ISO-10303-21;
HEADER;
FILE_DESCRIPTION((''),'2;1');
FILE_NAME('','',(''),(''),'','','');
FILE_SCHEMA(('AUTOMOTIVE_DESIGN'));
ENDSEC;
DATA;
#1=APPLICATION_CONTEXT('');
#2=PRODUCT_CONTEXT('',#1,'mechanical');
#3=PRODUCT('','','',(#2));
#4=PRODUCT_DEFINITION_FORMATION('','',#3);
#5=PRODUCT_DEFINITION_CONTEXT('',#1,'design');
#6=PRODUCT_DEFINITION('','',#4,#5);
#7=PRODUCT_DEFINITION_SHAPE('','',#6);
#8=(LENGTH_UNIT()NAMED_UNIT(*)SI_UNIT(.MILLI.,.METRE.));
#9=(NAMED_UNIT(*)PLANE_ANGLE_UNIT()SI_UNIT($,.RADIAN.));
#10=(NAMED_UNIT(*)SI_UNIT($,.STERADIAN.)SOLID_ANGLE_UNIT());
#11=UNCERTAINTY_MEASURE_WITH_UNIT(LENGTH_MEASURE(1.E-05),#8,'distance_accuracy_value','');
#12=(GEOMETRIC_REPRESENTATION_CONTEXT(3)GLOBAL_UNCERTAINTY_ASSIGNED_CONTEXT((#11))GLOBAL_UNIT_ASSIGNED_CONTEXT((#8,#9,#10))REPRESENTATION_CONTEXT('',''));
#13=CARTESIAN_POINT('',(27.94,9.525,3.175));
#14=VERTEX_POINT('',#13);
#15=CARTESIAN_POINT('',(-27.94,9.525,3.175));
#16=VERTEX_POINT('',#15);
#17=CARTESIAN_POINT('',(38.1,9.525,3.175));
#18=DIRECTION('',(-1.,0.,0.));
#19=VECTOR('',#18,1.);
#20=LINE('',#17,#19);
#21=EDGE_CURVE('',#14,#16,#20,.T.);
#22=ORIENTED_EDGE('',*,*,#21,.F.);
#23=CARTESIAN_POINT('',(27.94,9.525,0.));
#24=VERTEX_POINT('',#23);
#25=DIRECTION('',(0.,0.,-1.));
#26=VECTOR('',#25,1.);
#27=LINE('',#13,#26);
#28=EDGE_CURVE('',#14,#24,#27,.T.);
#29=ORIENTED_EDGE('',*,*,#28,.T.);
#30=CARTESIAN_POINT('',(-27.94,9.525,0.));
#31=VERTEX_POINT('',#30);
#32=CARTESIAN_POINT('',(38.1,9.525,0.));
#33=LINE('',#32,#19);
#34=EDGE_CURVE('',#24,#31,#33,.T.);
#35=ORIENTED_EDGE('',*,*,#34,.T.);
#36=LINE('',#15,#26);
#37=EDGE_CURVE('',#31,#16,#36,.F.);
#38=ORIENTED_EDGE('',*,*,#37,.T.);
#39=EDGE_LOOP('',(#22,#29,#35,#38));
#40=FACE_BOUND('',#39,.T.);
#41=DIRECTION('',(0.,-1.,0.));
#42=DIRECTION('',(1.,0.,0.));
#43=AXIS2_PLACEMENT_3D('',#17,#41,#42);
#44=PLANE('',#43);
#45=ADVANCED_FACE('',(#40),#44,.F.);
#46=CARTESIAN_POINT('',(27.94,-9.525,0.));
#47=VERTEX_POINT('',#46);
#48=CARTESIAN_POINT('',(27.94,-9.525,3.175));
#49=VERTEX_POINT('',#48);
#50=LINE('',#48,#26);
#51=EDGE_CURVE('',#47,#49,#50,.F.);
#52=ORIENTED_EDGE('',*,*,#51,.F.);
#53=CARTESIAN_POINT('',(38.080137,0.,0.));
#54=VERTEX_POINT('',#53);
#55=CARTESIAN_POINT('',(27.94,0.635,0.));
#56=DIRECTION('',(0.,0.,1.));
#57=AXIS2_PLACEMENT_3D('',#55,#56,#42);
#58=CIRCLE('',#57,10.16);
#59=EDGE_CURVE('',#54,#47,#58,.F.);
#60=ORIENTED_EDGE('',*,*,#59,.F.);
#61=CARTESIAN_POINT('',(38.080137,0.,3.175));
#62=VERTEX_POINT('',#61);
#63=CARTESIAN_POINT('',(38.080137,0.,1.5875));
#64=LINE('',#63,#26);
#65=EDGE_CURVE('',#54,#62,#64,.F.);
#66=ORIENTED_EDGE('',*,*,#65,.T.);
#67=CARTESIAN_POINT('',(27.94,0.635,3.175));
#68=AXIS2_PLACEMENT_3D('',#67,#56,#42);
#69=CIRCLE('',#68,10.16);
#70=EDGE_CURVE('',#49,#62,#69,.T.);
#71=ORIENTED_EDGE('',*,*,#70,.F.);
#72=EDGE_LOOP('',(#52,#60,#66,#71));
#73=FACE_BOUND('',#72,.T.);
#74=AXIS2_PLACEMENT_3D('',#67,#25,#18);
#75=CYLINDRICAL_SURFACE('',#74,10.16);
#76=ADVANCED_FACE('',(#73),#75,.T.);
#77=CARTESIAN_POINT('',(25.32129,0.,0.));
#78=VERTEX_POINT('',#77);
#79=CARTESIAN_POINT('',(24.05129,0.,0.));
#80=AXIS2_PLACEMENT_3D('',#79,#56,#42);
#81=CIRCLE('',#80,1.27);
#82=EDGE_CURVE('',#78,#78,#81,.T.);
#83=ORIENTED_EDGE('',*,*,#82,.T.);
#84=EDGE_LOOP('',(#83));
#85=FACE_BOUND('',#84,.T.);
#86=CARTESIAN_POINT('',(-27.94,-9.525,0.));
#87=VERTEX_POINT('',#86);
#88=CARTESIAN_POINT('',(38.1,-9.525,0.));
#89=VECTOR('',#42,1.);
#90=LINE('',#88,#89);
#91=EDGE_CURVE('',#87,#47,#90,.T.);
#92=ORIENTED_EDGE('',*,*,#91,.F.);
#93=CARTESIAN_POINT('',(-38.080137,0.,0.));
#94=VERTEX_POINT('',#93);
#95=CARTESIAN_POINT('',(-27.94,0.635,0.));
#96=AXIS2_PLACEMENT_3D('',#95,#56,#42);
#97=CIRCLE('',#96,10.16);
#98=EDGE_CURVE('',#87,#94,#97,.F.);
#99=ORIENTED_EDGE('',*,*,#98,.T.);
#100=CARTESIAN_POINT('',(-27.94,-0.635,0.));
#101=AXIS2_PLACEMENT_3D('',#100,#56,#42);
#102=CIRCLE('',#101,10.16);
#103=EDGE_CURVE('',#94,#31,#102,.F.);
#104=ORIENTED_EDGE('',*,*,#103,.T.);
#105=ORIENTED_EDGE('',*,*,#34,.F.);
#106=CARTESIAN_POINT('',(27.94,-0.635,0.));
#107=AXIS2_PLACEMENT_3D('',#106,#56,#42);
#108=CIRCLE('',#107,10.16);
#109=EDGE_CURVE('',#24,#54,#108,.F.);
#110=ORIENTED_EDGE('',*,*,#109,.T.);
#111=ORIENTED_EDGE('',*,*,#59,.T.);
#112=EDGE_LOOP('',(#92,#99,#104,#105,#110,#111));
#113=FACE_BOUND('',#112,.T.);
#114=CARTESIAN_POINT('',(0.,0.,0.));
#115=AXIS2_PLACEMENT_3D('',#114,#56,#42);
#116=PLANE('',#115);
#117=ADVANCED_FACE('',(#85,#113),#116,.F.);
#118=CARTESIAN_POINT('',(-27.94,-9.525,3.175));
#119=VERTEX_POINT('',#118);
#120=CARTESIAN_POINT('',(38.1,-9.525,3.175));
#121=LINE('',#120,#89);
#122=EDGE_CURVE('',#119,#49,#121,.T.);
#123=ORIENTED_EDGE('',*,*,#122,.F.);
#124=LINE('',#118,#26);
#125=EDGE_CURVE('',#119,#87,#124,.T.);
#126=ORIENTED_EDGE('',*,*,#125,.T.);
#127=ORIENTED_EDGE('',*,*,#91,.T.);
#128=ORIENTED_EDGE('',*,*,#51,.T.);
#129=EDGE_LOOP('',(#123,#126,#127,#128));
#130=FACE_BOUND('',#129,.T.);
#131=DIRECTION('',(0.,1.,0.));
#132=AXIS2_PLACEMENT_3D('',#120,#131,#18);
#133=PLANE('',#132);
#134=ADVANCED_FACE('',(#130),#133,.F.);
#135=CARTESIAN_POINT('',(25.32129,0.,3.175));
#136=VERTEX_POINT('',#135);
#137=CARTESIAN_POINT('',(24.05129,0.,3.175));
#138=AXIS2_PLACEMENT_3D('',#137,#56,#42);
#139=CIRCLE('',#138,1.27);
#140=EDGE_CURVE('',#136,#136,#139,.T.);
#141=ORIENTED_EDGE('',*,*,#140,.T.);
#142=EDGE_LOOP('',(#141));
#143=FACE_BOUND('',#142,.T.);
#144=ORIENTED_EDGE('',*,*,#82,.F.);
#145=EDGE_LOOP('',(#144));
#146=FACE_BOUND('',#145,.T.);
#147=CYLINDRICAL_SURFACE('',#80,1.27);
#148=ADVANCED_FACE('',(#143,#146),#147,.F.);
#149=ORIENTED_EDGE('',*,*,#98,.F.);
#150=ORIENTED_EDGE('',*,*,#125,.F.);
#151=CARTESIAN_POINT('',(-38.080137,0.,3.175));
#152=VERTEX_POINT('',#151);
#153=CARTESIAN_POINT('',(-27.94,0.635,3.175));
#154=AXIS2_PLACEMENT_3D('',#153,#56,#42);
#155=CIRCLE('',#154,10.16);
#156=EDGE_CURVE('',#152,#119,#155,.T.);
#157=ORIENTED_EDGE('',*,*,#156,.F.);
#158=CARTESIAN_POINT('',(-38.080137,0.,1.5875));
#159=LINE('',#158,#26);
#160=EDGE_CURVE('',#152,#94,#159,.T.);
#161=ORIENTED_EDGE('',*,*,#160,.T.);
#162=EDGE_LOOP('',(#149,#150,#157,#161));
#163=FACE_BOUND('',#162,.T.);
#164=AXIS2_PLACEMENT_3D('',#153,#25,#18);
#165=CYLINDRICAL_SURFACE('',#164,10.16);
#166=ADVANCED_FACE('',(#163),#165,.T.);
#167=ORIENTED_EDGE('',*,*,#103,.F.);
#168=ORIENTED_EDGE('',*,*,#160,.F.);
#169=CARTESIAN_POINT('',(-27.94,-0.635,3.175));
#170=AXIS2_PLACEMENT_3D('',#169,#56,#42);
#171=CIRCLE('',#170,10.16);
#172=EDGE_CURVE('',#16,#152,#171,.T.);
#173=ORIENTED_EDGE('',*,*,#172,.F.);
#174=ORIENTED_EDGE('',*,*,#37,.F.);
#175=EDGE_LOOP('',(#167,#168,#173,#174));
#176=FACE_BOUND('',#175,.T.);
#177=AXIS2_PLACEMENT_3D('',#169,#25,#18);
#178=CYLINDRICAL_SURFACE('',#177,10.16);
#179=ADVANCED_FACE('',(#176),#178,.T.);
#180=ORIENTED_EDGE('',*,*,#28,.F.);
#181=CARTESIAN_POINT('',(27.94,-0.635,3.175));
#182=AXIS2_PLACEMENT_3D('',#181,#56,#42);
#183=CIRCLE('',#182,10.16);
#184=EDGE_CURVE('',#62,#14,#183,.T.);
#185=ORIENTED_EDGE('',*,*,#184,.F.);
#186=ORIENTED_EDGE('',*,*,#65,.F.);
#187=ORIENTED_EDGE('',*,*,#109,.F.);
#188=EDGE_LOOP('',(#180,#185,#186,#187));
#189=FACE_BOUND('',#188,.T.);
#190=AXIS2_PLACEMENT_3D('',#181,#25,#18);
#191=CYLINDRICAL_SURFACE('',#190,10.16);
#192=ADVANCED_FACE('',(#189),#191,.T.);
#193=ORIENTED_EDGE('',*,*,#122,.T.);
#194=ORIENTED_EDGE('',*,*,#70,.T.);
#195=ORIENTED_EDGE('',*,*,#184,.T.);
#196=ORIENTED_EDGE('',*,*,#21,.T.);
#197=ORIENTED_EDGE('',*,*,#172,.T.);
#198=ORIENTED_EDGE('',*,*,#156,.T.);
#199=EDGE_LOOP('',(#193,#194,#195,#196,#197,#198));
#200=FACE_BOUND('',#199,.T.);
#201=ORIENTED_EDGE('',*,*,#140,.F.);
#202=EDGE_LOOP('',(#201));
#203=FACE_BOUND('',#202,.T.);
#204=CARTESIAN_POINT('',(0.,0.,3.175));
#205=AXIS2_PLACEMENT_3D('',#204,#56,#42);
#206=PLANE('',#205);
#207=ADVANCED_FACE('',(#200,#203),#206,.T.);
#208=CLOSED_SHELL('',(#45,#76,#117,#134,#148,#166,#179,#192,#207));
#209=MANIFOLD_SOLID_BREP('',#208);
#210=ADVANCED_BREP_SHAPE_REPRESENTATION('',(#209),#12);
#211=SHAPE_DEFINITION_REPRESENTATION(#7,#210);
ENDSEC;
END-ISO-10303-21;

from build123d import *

# Parameters (mm, degrees)
SKETCH1_W           = 76.2
SKETCH1_H           = 19.05
BOSS_EXTRUDE1_DEPTH = 3.175
SKETCH2_R           = 1.27
CUT_EXTRUDE1_DEPTH  = 40.400713826
FILLET1_R           = 10.16


with BuildPart() as part:
    # Sketch1 → Boss-Extrude1 (new body)
    with BuildSketch(Plane.XY):
        Rectangle(SKETCH1_W, SKETCH1_H)
    extrude(amount=BOSS_EXTRUDE1_DEPTH)

    # Sketch2 → Cut-Extrude1 (cut, through all)
    with BuildSketch(Plane.XY.offset(3.175)):
        with Locations((24.051290482, 0)):
            Circle(SKETCH2_R)
    extrude(amount=-CUT_EXTRUDE1_DEPTH, mode=Mode.SUBTRACT)

    # Fillet1
    # the kernel refuses this fillet: 10.16 mm, written as the material it takes off along each edge
    with BuildSketch(Plane(origin=(-38.1, -9.525, -25.4), x_dir=(1, 0, 0), z_dir=(0, 0, 1)), Plane(origin=(-38.1, 9.525, -25.4), x_dir=(0, -1, 0), z_dir=(0, 0, 1))) as fillet1_piece_1:
        with BuildLine():
            CenterArc((FILLET1_R, FILLET1_R), FILLET1_R, 180, 90)
            Line((0, FILLET1_R), (0, 0))
            Line((0, 0), (FILLET1_R, 0))
        make_face()
    extrude(amount=53.975, mode=Mode.SUBTRACT)
    with BuildSketch(Plane(origin=(38.1, -9.525, -25.4), x_dir=(-1, 0, 0), z_dir=(0, 0, 1)), Plane(origin=(38.1, 9.525, -25.4), x_dir=(0, -1, 0), z_dir=(0, 0, 1))) as fillet1_piece_2:
        with BuildLine():
            CenterArc((FILLET1_R, -FILLET1_R), FILLET1_R, 90, 90)
            Line((0, -FILLET1_R), (0, 0))
            Line((0, 0), (FILLET1_R, 0))
        make_face()
    extrude(amount=53.975, mode=Mode.SUBTRACT)


solid = part.part
